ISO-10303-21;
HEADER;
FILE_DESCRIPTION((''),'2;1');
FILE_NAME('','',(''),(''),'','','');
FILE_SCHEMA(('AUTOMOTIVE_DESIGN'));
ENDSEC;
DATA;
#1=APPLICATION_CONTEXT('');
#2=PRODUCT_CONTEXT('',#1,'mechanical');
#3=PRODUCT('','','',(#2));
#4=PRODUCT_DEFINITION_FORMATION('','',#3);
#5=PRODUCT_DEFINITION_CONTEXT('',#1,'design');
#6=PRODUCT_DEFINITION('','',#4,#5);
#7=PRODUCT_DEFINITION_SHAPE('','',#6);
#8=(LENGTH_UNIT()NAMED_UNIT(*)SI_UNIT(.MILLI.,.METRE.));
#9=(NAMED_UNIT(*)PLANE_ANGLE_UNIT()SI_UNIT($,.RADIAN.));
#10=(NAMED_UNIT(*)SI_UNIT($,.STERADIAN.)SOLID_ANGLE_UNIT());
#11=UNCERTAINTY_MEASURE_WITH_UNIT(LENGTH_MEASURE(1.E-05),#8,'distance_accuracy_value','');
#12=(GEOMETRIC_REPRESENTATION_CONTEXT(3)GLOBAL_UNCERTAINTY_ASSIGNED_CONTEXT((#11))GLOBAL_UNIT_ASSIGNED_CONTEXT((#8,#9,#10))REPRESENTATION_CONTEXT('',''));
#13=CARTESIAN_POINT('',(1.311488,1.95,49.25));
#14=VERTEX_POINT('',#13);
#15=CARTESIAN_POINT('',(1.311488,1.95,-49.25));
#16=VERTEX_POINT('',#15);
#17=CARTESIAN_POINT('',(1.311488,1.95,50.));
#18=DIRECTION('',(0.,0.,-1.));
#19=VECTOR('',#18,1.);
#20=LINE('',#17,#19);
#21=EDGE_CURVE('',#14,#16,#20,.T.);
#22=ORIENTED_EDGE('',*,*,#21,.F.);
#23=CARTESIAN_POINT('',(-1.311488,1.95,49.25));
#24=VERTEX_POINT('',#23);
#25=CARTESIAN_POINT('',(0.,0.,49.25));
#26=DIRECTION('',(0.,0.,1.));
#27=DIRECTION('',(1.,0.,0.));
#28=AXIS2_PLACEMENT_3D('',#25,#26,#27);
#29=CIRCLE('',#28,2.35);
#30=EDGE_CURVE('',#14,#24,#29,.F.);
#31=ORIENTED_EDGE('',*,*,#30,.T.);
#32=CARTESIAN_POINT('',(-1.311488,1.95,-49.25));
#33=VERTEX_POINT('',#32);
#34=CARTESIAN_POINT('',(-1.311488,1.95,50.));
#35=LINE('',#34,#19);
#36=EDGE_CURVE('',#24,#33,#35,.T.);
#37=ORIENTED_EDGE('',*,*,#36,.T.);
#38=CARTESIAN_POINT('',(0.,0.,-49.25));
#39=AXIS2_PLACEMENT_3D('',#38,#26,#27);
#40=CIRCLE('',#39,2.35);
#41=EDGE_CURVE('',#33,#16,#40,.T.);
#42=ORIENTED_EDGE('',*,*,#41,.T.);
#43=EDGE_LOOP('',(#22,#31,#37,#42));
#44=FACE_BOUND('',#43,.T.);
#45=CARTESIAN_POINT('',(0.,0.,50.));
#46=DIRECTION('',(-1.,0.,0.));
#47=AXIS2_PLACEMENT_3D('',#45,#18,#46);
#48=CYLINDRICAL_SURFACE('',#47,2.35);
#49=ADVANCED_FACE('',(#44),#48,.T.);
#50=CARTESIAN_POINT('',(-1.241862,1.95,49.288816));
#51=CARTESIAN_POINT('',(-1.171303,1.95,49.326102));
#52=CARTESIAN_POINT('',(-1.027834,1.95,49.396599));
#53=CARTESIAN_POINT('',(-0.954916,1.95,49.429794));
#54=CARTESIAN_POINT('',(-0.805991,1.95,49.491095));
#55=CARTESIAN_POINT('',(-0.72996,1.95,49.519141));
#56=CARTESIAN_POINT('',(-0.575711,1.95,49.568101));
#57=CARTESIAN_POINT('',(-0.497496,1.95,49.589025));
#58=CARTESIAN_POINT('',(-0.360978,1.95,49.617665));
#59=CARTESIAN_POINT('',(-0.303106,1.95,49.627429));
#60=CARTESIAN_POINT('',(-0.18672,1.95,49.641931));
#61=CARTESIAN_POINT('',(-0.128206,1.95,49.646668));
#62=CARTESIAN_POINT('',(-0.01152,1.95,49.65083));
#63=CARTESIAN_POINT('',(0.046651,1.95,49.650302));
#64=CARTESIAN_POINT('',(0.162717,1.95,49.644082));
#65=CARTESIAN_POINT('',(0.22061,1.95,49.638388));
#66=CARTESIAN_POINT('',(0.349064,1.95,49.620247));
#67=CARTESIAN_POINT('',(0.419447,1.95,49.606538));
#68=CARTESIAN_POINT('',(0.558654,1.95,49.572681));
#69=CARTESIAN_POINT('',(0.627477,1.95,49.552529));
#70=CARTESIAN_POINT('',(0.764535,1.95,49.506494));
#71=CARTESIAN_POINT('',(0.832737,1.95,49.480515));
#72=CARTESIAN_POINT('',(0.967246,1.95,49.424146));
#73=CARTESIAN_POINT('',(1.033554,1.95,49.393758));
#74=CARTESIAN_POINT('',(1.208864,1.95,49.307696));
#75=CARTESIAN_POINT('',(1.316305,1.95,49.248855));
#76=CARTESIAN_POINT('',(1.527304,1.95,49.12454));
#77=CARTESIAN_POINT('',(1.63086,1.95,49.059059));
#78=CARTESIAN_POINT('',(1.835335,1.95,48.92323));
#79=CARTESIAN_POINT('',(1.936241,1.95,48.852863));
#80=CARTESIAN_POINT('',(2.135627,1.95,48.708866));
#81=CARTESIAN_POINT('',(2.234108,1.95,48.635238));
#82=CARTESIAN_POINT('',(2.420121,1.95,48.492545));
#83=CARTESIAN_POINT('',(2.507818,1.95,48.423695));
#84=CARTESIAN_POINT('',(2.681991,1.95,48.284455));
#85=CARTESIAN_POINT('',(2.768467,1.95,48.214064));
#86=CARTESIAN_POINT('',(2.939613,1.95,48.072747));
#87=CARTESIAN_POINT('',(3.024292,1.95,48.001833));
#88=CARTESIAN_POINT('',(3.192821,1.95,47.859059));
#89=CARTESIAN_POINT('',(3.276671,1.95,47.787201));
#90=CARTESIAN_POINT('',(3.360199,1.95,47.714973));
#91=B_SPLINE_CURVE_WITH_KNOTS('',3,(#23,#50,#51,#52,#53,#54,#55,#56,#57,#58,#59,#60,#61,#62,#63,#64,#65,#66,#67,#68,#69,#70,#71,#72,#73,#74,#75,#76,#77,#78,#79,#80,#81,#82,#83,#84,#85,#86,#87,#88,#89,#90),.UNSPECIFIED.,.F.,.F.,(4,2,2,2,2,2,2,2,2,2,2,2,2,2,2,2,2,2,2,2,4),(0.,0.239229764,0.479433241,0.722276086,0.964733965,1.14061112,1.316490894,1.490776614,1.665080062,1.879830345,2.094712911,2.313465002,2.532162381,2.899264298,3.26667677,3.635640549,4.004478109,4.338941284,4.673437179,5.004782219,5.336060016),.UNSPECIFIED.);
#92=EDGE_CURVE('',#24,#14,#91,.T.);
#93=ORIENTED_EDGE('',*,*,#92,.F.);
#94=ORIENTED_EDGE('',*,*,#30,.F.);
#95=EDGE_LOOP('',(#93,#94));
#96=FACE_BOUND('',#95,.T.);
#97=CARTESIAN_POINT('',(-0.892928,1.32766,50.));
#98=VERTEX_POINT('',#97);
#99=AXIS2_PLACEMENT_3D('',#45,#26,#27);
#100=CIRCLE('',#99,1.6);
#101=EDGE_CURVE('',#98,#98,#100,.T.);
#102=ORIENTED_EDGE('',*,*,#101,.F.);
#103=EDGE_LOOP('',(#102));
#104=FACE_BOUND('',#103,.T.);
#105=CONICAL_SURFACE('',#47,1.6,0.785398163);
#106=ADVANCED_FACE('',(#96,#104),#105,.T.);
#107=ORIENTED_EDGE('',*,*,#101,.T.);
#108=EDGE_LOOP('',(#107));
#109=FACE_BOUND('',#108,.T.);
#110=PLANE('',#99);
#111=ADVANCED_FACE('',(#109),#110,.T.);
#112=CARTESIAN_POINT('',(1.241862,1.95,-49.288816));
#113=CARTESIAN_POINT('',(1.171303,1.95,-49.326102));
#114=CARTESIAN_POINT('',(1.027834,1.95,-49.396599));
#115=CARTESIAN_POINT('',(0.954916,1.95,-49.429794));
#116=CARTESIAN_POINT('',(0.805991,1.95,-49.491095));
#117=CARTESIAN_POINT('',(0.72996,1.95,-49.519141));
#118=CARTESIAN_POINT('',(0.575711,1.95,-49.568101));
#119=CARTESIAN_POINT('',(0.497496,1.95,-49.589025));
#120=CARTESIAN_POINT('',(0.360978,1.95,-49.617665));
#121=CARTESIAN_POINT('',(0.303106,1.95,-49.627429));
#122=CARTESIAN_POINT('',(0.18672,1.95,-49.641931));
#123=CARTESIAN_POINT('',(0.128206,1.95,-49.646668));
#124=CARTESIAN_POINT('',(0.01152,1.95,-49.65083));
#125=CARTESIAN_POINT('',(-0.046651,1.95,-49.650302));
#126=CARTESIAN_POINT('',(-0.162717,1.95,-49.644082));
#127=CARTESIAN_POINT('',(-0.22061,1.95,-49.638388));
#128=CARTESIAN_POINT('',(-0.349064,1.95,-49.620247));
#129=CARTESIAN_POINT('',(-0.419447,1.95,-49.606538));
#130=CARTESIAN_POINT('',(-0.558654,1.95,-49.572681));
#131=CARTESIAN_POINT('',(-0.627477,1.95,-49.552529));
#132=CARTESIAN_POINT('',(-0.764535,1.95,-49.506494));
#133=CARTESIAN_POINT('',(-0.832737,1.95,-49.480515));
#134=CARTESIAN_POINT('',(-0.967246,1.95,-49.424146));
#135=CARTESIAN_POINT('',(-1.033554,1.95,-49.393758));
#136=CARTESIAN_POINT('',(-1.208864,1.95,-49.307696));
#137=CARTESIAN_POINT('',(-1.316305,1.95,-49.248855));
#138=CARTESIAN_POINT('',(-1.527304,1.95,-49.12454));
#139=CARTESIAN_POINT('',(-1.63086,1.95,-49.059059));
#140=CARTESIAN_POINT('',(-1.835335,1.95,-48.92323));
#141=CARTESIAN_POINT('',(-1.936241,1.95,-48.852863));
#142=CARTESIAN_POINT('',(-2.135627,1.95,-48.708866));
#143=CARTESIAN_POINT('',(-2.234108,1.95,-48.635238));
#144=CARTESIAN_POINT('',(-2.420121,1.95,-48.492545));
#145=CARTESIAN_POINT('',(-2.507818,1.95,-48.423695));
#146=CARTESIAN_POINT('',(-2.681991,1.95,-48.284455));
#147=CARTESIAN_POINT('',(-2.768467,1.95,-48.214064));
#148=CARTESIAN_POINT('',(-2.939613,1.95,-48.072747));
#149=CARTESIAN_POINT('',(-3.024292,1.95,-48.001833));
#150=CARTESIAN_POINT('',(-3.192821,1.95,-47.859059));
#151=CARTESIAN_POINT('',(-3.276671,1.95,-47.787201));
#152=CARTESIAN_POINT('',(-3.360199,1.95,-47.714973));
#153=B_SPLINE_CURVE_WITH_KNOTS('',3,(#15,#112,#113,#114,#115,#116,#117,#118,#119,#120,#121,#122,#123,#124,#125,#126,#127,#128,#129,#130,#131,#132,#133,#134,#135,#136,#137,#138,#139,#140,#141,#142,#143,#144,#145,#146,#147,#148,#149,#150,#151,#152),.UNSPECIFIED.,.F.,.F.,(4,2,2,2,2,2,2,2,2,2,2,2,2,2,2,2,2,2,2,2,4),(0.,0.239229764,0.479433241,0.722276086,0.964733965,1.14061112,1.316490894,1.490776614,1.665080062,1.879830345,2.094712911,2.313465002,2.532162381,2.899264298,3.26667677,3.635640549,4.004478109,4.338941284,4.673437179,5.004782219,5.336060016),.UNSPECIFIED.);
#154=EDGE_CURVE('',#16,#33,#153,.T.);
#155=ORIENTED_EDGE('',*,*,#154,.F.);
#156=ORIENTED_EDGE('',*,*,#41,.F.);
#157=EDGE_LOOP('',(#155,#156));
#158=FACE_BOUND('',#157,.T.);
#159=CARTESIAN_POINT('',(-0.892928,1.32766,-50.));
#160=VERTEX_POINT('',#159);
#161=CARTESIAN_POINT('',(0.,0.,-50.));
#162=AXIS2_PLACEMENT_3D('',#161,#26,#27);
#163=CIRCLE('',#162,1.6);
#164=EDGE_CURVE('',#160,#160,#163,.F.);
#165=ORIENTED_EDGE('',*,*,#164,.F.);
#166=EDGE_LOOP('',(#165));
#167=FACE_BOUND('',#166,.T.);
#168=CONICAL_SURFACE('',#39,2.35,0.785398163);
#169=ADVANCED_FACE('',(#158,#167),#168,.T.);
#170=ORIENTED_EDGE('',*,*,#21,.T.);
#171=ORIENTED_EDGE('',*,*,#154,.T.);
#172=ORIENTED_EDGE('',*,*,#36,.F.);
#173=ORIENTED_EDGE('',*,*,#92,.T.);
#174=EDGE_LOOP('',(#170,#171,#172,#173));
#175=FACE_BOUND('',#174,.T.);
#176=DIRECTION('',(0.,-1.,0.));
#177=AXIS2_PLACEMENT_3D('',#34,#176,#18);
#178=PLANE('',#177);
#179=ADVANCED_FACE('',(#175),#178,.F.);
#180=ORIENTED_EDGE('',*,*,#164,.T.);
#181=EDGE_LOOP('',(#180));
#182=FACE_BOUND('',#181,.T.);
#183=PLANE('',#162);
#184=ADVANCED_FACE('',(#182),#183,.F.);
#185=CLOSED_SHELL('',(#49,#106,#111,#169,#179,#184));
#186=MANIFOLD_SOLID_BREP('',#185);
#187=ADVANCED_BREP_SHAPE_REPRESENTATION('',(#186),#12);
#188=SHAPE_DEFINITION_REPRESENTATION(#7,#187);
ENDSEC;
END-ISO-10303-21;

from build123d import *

# Parameters (mm, degrees)
BOSS_EXTRUDE1_DEPTH = 50


with BuildPart() as part:
    # Sketch1 → Boss-Extrude1 (new, symmetric)
    with BuildSketch(Plane.XY):
        with BuildLine():
            Line((-1.311487705, 1.95), (1.311487705, 1.95))
            ThreePointArc((1.311487705, 1.95), (0, -2.35), (-1.311487705, 1.95))
        make_face()
    extrude(amount=BOSS_EXTRUDE1_DEPTH, both=True)

    # Chamfer1: read off the stored shape, not the designer's step
    # Chamfer1 outline → Chamfer1 (revolve, cut)
    with BuildSketch(Plane.XZ):
        Polygon((2.35, -49.25), (1.6, -50), (2.35, -50), align=None)
        Polygon((1.6, 50), (2.35, 49.25), (2.35, 50), align=None)
    revolve(axis=Axis((0, 0, 0), (0, 0, 1)), mode=Mode.SUBTRACT)


solid = part.part
